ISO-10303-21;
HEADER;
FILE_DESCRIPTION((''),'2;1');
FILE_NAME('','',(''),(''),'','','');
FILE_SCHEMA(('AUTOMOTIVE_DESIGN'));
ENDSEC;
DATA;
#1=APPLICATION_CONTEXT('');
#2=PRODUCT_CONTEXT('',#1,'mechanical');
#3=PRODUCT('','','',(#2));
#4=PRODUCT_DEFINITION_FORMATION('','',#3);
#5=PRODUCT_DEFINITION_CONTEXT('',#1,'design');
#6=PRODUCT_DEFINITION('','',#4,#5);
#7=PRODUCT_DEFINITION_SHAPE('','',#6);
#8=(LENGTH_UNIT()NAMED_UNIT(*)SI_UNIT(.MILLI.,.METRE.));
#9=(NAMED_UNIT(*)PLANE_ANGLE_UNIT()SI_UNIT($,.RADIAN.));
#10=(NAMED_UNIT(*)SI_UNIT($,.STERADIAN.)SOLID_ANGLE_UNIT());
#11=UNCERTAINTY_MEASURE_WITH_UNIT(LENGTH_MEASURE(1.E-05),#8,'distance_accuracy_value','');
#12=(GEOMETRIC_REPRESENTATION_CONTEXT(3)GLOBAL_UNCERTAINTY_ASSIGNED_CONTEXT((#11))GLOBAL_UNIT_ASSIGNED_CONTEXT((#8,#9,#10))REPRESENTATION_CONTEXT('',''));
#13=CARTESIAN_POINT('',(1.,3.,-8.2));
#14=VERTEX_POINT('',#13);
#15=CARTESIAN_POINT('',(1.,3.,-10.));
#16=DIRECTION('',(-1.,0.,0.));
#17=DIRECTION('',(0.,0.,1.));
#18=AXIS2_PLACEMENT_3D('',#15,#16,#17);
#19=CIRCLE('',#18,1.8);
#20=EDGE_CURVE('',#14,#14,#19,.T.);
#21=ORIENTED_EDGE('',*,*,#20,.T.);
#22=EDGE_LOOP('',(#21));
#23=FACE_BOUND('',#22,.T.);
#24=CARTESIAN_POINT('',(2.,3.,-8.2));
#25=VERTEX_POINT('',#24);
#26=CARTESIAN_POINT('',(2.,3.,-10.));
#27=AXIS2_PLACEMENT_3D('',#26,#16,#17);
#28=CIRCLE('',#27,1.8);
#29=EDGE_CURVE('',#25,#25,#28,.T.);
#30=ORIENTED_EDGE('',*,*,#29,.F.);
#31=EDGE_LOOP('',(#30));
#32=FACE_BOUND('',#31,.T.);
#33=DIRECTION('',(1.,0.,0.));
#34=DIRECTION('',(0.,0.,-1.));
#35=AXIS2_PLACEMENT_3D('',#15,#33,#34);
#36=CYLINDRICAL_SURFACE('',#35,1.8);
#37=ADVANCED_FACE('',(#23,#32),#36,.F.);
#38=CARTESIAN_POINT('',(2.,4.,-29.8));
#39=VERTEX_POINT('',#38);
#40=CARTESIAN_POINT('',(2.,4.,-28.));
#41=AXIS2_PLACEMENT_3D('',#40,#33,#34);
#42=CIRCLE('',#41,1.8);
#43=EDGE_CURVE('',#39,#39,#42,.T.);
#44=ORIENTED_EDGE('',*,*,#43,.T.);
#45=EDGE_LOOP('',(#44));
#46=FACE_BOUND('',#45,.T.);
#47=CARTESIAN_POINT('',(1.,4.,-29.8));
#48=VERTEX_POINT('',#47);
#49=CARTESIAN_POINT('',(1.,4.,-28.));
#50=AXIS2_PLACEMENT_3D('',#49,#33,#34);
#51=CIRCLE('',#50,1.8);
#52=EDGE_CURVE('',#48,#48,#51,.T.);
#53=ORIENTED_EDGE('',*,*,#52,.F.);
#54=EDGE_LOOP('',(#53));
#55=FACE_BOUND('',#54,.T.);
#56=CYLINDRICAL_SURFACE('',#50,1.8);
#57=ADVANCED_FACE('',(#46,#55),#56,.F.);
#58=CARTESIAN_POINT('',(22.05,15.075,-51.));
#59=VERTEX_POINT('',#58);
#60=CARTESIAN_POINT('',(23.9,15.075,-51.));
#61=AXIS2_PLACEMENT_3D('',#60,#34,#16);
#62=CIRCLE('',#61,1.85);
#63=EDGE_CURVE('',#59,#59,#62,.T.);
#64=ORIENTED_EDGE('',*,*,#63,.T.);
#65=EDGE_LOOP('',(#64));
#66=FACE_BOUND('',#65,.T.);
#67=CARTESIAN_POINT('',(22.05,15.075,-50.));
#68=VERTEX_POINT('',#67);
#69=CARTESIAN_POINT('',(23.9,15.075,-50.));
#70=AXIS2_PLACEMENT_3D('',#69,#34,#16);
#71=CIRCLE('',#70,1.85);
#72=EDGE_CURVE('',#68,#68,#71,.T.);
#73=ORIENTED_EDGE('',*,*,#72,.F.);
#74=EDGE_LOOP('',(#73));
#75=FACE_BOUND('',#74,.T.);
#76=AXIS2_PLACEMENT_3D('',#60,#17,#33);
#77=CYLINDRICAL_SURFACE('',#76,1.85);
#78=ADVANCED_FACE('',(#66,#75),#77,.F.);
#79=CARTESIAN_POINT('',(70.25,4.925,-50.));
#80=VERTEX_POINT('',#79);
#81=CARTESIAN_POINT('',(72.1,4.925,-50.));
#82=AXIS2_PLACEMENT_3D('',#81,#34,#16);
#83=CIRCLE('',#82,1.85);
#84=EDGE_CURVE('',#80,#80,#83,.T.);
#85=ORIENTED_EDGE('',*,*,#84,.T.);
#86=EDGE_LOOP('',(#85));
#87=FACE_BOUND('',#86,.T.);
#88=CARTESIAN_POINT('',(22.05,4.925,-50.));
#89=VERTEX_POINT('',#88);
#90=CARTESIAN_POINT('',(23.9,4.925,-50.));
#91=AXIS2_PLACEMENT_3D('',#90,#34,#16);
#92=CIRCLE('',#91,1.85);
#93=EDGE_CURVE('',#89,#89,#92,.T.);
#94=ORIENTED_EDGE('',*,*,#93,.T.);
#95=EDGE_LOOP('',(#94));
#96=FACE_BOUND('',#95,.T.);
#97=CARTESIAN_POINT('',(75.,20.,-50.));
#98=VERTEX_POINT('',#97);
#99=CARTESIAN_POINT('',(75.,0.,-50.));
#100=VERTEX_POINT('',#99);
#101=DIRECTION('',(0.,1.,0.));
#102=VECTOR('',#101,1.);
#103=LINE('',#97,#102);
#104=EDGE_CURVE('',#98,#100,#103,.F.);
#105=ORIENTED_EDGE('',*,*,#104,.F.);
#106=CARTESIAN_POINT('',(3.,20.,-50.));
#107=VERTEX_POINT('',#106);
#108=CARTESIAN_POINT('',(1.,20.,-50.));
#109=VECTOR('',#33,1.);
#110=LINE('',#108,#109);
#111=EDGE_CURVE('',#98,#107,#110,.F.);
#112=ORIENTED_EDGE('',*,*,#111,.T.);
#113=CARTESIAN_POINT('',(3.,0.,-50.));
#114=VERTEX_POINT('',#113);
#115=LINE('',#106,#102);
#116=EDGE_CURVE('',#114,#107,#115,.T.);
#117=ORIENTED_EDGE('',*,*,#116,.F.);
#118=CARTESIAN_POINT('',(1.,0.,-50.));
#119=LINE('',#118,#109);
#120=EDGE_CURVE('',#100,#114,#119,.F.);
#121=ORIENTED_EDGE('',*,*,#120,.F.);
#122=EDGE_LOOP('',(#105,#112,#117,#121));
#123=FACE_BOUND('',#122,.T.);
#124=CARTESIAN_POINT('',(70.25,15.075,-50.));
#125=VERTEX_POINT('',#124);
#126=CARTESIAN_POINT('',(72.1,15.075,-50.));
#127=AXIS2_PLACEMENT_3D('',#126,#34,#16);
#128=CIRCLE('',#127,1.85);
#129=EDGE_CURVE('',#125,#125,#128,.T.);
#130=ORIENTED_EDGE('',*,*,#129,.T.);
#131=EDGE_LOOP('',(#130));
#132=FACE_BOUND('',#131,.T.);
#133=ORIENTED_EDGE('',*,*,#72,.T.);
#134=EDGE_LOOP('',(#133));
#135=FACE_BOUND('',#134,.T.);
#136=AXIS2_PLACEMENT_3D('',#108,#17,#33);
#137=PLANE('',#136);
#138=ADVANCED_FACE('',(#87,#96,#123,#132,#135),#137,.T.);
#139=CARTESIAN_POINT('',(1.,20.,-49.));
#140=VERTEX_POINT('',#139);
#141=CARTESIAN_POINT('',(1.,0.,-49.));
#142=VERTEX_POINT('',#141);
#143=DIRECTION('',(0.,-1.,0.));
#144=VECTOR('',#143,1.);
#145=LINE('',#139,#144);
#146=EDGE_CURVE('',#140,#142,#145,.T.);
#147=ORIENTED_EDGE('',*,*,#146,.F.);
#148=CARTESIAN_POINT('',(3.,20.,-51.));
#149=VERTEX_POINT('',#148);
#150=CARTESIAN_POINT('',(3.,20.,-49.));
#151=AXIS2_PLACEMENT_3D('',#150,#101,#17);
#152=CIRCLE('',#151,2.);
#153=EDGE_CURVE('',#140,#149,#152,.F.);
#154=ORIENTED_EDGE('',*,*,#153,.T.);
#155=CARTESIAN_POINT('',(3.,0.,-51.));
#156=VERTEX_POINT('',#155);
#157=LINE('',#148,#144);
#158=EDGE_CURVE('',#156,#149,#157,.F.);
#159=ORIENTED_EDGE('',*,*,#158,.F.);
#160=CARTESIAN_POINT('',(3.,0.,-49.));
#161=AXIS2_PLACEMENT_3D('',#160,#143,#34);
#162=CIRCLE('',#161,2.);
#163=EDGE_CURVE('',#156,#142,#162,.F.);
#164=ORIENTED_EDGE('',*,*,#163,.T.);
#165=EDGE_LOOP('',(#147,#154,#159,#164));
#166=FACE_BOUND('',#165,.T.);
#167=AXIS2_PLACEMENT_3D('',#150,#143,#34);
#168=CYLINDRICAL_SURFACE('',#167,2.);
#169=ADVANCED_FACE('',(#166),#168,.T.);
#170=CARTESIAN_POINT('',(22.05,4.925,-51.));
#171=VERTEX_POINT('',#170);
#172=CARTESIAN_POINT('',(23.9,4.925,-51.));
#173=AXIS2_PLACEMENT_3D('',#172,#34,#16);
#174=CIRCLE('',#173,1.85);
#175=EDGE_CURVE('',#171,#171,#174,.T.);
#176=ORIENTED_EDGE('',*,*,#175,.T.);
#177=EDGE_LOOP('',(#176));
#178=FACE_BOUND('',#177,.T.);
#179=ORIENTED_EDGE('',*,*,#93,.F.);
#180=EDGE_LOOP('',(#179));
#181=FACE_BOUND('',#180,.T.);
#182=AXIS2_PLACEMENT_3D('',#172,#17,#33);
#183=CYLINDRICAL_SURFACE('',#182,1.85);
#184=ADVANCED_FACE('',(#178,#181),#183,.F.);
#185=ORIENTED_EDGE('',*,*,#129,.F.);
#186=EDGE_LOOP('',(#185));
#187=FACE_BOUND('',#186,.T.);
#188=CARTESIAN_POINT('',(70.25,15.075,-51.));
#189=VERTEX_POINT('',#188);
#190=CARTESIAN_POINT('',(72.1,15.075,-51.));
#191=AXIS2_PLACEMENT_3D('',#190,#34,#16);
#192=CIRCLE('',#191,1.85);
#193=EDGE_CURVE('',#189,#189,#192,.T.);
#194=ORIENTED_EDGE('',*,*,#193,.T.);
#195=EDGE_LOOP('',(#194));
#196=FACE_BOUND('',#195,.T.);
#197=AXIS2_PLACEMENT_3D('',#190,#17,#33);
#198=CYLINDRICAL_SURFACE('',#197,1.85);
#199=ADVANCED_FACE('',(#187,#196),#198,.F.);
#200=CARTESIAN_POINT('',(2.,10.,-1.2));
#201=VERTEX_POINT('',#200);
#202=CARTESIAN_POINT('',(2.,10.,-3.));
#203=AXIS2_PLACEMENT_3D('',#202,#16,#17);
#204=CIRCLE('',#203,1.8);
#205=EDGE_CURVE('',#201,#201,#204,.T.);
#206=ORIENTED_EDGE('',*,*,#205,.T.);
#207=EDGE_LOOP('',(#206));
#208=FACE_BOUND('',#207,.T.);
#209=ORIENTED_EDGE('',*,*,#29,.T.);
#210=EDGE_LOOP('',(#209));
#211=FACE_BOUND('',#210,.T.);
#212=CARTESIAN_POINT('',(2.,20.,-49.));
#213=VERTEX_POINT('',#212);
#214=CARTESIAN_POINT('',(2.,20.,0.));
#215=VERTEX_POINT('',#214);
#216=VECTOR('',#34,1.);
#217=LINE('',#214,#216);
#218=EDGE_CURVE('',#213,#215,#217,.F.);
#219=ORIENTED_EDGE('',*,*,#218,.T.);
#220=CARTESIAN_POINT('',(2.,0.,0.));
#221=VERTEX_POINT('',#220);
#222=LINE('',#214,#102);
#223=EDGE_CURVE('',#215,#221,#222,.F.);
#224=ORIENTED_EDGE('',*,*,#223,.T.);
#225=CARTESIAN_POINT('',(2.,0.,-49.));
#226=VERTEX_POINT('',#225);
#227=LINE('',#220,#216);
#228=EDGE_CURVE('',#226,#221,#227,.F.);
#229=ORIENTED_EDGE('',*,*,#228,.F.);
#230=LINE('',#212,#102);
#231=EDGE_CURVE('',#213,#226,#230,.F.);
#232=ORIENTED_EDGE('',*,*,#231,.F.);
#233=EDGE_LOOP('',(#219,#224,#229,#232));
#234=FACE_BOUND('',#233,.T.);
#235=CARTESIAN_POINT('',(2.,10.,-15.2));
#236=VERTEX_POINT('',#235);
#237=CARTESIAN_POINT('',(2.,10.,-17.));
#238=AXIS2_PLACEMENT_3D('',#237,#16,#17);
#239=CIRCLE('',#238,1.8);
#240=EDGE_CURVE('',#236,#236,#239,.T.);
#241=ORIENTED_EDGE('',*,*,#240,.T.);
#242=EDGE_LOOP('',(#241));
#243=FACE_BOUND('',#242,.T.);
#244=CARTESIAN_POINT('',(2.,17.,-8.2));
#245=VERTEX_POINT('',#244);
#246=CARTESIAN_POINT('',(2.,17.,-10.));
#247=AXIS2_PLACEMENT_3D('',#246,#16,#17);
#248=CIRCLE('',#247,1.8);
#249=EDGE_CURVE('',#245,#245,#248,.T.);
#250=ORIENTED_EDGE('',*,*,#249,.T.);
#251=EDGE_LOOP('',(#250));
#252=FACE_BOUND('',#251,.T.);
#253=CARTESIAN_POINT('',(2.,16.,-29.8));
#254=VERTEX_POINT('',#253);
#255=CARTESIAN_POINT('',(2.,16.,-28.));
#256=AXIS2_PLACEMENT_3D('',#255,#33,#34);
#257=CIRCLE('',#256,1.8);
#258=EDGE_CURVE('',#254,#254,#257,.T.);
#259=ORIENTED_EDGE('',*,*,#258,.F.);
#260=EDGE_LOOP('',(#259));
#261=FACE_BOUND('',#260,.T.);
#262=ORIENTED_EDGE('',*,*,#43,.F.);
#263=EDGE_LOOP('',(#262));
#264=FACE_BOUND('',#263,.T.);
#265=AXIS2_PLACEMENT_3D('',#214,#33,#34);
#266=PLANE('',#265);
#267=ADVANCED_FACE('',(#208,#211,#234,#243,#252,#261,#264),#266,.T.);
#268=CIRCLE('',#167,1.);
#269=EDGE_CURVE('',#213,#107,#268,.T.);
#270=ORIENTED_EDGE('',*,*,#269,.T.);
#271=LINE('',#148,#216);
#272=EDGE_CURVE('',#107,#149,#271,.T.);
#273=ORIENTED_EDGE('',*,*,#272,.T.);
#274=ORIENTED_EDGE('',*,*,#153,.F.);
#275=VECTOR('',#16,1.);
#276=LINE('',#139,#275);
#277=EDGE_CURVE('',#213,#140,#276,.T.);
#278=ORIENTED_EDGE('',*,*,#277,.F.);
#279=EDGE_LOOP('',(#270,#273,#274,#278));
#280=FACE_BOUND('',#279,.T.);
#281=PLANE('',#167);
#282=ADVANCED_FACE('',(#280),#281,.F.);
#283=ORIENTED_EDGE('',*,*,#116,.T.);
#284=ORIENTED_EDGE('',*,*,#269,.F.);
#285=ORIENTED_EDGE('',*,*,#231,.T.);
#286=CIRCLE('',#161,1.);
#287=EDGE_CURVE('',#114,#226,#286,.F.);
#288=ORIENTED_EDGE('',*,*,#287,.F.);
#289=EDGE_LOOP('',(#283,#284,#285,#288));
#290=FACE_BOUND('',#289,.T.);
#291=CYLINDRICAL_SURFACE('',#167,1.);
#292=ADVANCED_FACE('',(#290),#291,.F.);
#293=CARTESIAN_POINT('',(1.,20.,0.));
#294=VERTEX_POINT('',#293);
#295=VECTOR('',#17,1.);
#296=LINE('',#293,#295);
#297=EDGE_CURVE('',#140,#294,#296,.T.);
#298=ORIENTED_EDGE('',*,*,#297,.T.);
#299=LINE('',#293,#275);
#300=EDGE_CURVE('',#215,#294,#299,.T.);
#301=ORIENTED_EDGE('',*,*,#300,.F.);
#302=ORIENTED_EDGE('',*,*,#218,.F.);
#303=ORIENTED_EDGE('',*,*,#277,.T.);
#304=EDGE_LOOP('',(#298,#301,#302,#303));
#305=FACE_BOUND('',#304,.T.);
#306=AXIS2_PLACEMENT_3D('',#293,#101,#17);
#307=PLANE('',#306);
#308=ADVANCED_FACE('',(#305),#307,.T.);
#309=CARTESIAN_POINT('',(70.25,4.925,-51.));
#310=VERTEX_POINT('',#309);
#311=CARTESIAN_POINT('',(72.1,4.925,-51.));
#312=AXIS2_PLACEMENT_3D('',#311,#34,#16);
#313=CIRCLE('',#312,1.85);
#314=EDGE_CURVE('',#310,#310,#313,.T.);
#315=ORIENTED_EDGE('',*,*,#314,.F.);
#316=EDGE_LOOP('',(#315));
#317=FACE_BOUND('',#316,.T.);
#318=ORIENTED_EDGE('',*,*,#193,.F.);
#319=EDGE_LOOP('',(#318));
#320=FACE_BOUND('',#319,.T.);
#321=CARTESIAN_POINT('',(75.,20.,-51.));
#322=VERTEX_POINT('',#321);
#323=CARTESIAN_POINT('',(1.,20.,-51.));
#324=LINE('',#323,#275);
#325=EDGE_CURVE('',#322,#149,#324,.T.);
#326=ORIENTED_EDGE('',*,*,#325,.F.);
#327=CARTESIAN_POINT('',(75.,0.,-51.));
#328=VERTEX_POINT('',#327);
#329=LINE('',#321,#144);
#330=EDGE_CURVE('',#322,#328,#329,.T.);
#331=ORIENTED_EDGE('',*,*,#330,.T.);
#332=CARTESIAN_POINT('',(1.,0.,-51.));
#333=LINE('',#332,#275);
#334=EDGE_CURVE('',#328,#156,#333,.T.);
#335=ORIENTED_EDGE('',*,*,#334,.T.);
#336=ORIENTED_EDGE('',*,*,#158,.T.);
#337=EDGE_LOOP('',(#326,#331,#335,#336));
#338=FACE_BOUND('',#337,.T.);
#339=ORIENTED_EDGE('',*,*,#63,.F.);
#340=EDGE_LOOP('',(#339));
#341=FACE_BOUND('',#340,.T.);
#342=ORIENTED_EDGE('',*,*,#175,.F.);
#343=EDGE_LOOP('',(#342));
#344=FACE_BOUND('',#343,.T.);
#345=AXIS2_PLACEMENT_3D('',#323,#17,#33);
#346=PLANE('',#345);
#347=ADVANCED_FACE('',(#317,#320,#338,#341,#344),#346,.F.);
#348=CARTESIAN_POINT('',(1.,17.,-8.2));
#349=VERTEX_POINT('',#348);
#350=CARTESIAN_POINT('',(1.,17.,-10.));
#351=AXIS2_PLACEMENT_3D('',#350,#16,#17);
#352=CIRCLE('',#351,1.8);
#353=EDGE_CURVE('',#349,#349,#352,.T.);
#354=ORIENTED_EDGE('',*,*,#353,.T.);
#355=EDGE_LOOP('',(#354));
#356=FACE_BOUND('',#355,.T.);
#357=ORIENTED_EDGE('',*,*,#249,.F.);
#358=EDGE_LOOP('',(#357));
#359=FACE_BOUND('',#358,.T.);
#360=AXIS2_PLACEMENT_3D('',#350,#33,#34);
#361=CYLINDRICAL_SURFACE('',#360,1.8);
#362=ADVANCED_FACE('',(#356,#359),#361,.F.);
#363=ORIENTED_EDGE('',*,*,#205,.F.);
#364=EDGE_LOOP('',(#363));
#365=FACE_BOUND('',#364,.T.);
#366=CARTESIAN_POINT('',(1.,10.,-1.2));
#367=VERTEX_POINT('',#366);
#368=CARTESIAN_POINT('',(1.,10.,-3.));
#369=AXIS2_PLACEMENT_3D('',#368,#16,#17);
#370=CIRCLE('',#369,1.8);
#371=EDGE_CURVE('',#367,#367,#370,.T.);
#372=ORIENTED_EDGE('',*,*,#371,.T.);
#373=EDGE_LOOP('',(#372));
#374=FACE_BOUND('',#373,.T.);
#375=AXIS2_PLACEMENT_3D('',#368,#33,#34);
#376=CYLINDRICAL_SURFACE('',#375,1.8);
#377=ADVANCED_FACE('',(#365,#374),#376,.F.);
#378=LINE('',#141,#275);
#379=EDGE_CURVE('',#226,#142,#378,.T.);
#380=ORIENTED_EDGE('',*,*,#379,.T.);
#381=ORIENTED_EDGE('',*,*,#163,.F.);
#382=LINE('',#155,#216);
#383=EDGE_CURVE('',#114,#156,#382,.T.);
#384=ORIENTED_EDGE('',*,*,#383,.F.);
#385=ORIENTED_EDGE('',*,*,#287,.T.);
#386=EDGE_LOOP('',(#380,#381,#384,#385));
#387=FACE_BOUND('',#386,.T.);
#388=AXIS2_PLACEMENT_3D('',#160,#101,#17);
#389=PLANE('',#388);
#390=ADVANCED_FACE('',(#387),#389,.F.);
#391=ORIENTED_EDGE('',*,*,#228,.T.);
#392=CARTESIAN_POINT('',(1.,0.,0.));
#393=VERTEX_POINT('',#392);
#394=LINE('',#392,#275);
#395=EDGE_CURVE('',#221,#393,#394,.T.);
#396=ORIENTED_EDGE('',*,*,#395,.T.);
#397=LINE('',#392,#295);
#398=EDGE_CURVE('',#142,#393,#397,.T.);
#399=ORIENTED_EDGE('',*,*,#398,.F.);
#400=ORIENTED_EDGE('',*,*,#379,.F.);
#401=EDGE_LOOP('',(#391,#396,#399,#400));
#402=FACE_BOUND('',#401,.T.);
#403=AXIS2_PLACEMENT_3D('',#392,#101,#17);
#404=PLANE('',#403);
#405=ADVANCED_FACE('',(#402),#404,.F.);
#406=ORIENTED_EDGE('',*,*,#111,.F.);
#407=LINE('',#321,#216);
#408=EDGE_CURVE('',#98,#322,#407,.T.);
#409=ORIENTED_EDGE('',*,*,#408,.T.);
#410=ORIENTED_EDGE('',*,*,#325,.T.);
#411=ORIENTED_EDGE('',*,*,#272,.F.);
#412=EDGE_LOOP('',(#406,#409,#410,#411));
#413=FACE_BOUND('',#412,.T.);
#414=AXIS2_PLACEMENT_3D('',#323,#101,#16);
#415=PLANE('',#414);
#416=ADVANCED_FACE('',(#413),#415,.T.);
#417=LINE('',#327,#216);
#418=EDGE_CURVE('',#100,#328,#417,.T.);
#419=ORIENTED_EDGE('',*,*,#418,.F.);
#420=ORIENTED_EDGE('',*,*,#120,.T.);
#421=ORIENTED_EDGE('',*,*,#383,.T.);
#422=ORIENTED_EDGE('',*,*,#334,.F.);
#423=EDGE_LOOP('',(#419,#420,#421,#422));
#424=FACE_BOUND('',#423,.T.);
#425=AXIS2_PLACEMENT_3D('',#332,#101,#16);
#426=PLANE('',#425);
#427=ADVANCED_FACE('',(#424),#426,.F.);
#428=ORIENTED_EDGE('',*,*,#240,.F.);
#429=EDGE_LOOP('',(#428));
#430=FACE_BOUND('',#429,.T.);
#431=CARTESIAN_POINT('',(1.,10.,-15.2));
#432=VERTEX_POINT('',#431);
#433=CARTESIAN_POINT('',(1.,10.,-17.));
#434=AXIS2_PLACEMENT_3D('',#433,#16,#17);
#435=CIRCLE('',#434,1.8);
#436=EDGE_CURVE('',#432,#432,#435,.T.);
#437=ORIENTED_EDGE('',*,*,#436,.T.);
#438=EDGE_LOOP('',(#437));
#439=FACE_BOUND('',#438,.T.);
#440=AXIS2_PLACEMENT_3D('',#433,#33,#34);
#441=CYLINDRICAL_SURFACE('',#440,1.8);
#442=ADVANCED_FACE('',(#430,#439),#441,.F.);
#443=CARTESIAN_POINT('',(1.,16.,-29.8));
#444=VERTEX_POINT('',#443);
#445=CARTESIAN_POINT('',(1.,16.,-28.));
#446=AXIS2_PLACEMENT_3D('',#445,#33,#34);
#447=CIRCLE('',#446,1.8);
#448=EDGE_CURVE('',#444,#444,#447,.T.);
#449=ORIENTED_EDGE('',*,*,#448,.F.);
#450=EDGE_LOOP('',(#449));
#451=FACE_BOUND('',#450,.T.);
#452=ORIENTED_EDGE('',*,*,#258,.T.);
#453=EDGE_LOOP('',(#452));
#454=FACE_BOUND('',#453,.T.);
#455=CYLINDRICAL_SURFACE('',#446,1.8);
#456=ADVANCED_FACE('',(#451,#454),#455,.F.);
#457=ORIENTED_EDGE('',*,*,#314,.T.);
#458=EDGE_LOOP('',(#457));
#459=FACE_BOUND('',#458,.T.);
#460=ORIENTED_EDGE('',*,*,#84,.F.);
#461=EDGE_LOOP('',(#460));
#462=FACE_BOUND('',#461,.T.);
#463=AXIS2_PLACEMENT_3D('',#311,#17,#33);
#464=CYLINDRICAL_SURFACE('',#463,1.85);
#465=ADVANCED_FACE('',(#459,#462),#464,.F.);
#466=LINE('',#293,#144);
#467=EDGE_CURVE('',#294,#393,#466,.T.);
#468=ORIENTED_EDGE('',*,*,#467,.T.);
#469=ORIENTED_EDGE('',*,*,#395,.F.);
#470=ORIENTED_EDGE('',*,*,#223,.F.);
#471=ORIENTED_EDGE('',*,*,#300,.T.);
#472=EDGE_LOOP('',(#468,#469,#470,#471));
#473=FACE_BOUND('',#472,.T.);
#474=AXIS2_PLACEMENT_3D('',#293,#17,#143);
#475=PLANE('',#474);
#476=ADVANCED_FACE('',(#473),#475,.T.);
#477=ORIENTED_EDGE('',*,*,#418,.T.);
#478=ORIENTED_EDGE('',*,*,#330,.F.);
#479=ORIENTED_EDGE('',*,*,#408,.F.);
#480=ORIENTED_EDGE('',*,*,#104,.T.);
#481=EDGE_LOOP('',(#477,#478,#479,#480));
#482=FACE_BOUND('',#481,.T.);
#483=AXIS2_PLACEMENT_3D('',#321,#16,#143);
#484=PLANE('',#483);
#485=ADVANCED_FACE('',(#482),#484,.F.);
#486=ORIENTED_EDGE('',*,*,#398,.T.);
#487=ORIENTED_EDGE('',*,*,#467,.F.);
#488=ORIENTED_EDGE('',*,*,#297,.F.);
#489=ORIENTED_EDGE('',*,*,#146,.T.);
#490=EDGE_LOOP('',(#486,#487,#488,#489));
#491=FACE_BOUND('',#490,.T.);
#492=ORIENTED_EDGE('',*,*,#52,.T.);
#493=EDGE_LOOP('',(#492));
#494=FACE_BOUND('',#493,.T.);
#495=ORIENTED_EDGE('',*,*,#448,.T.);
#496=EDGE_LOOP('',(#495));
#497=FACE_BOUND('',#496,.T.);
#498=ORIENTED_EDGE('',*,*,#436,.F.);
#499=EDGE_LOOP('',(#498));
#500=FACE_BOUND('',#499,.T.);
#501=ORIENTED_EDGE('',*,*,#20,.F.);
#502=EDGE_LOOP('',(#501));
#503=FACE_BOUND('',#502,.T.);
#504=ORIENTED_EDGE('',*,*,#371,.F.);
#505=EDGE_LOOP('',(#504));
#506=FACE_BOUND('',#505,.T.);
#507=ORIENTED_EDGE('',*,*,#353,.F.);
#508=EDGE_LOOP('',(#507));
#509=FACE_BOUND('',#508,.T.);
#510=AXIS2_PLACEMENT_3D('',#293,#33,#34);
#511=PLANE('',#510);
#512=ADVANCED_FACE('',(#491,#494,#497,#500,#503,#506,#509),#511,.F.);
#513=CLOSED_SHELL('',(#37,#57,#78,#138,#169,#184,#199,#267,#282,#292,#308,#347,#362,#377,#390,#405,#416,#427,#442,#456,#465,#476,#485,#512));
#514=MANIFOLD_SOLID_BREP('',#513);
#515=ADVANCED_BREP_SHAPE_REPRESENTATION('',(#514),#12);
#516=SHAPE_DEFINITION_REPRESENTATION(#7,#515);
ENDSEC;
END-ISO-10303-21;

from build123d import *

# Parameters (mm, degrees)
EXTRUDE_1_DEPTH       = 20
SKETCH_22_R           = 1.8
CUT_EXTRUDE_1_DEPTH   = 93.070625066
SKETCH_23_R           = 1.85
CUT_EXTRUDE_2_DEPTH   = 93.876261768
SHEET_METAL_1_DEPTH   = 20
SHEET_METAL_1_2_DEPTH = 20
SKETCH_24_R           = 1.8
CUT_EXTRUDE_3_DEPTH   = 92.268833673


# Read off the part's stored shape, not the designer's step: 转换实体1
with BuildPart() as part:
    # Sketch 1 → 凸台-拉伸1 (new body)
    with BuildSketch(Plane(origin=(0, 0, 0), x_dir=(1, 0, 0), z_dir=(0, 1, 0))):
        Polygon((2, 0), (2, 50), (74, 50), (75, 50), (75, 51), (1, 51), (1, 0), align=None)
    extrude(amount=EXTRUDE_1_DEPTH)

    # 草图22 → 切除-拉伸1 (cut, through all)
    with BuildSketch(Plane.ZY.offset(-1)):
        with Locations((-17, 10)):
            Circle(SKETCH_22_R)
        with Locations((-10, 17)):
            Circle(SKETCH_22_R)
        with Locations((-3, 10)):
            Circle(SKETCH_22_R)
        with Locations((-10, 3)):
            Circle(SKETCH_22_R)
    extrude(amount=-CUT_EXTRUDE_1_DEPTH, mode=Mode.SUBTRACT)

    # 草图23 → 切除-拉伸2 (cut, through all)
    with BuildSketch(Plane(origin=(0, 0, -51), x_dir=(-1, 0, 0), z_dir=(0, 0, -1))):
        with Locations((-72.1, 15.075)):
            Circle(SKETCH_23_R)
        with Locations((-72.1, 4.925)):
            Circle(SKETCH_23_R)
        with Locations((-23.9, 4.925)):
            Circle(SKETCH_23_R)
        with Locations((-23.9, 15.075)):
            Circle(SKETCH_23_R)
    extrude(amount=-CUT_EXTRUDE_2_DEPTH, mode=Mode.SUBTRACT)

    # Sheet Metal 1 outline → Sheet Metal 1 (cut)
    with BuildSketch(Plane(origin=(0, 0, 0), x_dir=(1, 0, 0), z_dir=(0, 1, 0))):
        with BuildLine():
            Line((1, 51), (1, 49))
            ThreePointArc((1, 49), (1.585786438, 50.414213562), (3, 51))
            Line((3, 51), (1, 51))
        make_face()
    extrude(amount=SHEET_METAL_1_DEPTH, mode=Mode.SUBTRACT)

    # Sheet Metal 1 2 outline → Sheet Metal 1 2 (add)
    with BuildSketch(Plane(origin=(0, 0, 0), x_dir=(1, 0, 0), z_dir=(0, 1, 0))):
        with BuildLine():
            Line((2, 50), (2, 49))
            ThreePointArc((2, 49), (2.292893219, 49.707106781), (3, 50))
            Line((3, 50), (2, 50))
        make_face()
    extrude(amount=SHEET_METAL_1_2_DEPTH)

    # 草图24 → 切除-拉伸3 (cut, through all)
    with BuildSketch(Plane(origin=(2, 0, 0), x_dir=(0, 0, -1), z_dir=(1, 0, 0))):
        with Locations((28, 16)):
            Circle(SKETCH_24_R)
        with Locations((28, 4)):
            Circle(SKETCH_24_R)
    extrude(amount=-CUT_EXTRUDE_3_DEPTH, mode=Mode.SUBTRACT)


solid = part.part
